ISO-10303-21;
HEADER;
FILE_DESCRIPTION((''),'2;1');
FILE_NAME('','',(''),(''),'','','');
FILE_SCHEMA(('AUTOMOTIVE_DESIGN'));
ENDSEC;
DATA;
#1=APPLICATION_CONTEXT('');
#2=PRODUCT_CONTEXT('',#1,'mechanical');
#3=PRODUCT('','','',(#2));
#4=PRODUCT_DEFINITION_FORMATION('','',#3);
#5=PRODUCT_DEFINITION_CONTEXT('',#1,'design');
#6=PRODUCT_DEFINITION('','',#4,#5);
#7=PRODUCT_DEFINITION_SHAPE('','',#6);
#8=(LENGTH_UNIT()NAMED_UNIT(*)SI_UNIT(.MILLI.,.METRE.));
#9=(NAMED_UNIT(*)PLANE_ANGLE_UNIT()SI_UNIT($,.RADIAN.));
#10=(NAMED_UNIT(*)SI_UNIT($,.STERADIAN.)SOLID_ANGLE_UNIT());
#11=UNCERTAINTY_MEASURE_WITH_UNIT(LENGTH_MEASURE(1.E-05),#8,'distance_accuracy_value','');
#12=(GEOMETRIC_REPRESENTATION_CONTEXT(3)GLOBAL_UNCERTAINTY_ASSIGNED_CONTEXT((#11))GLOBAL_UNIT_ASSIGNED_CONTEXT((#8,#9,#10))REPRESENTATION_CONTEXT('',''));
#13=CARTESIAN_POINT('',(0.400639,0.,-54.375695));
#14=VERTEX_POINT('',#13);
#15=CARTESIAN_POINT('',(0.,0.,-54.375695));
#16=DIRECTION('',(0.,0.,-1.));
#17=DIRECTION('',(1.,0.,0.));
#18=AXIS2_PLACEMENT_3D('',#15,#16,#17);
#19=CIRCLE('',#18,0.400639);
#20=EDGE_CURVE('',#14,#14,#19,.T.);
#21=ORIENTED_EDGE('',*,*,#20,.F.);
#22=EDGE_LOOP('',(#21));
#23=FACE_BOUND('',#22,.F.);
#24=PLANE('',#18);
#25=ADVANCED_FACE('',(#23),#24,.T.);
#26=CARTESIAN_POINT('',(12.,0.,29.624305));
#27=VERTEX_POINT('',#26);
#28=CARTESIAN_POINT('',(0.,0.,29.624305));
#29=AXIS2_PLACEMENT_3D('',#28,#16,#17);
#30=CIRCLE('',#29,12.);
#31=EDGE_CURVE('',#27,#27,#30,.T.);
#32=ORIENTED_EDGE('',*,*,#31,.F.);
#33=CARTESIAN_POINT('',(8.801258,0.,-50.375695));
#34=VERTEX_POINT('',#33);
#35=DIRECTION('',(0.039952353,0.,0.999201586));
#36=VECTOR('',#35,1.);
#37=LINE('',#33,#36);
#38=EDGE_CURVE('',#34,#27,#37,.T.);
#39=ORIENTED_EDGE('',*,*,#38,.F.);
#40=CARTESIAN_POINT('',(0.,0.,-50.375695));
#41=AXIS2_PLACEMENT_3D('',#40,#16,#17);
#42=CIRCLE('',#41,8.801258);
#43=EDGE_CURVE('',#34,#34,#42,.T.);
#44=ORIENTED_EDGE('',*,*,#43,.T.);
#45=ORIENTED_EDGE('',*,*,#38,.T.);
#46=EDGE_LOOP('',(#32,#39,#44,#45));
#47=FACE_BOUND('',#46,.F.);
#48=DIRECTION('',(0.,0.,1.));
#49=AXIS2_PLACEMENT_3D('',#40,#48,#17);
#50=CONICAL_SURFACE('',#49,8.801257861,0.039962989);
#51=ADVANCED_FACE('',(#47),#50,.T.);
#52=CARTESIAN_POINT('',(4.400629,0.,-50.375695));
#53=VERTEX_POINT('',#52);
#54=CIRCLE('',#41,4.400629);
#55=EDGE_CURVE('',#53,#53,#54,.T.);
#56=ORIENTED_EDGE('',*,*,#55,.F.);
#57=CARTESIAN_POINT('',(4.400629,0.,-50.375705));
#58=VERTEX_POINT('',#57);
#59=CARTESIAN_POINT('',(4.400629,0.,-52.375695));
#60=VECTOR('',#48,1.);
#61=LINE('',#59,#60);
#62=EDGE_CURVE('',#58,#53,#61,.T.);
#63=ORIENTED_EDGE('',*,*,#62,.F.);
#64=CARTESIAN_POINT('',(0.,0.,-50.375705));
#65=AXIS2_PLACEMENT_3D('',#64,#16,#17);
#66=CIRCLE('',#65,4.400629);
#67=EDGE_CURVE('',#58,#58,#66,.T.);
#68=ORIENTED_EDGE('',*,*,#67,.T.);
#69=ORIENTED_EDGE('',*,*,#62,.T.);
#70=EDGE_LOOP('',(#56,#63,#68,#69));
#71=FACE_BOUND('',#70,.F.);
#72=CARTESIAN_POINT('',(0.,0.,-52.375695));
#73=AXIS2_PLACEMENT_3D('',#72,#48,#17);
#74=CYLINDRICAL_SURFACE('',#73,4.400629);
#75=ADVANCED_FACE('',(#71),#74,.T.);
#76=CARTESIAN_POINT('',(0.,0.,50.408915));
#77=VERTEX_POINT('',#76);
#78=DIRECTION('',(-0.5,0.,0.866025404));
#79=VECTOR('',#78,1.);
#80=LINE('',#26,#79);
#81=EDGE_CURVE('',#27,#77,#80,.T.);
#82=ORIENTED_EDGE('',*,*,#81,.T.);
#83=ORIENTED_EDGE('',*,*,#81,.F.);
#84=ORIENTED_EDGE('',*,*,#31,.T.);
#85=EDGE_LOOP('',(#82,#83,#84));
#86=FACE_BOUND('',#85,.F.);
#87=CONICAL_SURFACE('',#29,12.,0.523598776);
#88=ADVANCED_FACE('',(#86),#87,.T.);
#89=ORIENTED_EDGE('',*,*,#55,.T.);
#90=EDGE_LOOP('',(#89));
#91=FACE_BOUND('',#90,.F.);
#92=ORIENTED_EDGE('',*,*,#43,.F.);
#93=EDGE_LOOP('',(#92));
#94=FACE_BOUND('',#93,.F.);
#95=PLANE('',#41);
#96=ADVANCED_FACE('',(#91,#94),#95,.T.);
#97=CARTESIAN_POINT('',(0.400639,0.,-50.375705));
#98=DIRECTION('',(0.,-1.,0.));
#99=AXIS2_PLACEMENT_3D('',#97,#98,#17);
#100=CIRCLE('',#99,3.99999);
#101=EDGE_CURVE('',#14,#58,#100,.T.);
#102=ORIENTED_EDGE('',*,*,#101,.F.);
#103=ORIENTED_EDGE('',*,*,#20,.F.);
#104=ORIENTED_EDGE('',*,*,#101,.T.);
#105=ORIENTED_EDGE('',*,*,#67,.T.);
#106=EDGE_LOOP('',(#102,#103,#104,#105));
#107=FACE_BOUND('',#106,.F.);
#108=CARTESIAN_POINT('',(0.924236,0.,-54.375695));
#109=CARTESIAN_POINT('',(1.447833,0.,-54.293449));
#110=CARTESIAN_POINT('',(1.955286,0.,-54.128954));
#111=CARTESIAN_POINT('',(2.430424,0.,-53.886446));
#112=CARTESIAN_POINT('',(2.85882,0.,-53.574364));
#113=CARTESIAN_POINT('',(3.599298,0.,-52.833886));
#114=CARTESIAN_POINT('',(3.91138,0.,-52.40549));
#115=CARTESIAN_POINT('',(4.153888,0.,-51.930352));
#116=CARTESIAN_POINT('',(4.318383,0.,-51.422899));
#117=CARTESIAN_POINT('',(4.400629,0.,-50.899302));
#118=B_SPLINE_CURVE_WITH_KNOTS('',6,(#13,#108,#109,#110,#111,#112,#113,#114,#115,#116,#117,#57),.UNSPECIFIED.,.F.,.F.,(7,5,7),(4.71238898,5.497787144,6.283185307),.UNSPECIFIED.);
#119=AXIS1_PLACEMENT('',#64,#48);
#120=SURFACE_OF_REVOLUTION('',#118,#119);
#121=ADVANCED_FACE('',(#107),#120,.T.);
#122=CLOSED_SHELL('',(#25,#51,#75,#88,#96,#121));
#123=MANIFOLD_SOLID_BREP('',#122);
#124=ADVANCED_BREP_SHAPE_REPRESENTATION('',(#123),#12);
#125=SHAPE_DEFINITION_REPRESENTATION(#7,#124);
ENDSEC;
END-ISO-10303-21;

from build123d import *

# Parameters (mm, degrees)
F0_W = 4.4006289305
F0_H = 4
F2_R = 3.99999


# Not quite as in the source:
# - a fillet or chamfer is up to 0.001 mm smaller than in the source, because OpenCascade refuses the exact size


with BuildPart() as f1:
    # F0 (on Front) → F1 (revolve)
    with BuildSketch(Plane.XZ):
        Polygon((12, 29.6243050845), (0, 50.4089147754), (0, 29.6243050845), align=None)
        Polygon((8.801257861, -50.3756949155), (12, 29.6243050845), (0, 29.6243050845), (0, -50.3756949155), (4.4006289305, -50.3756949155), align=None)
        with Locations((2.2003144653, -52.3756949155)):
            Rectangle(F0_W, F0_H)
    revolve(axis=Axis((0, 0, -1.98339007), (0, 0, -1)))

    # F2 (radius 4 in the source; OpenCascade refuses exactly that, so slightly less here)
    f2_edges = [f1.edges().sort_by_distance(p)[0] for p in [
        (-4.400629, 0, -54.375695),
    ]]
    fillet(f2_edges, radius=F2_R)


solid = f1.part
